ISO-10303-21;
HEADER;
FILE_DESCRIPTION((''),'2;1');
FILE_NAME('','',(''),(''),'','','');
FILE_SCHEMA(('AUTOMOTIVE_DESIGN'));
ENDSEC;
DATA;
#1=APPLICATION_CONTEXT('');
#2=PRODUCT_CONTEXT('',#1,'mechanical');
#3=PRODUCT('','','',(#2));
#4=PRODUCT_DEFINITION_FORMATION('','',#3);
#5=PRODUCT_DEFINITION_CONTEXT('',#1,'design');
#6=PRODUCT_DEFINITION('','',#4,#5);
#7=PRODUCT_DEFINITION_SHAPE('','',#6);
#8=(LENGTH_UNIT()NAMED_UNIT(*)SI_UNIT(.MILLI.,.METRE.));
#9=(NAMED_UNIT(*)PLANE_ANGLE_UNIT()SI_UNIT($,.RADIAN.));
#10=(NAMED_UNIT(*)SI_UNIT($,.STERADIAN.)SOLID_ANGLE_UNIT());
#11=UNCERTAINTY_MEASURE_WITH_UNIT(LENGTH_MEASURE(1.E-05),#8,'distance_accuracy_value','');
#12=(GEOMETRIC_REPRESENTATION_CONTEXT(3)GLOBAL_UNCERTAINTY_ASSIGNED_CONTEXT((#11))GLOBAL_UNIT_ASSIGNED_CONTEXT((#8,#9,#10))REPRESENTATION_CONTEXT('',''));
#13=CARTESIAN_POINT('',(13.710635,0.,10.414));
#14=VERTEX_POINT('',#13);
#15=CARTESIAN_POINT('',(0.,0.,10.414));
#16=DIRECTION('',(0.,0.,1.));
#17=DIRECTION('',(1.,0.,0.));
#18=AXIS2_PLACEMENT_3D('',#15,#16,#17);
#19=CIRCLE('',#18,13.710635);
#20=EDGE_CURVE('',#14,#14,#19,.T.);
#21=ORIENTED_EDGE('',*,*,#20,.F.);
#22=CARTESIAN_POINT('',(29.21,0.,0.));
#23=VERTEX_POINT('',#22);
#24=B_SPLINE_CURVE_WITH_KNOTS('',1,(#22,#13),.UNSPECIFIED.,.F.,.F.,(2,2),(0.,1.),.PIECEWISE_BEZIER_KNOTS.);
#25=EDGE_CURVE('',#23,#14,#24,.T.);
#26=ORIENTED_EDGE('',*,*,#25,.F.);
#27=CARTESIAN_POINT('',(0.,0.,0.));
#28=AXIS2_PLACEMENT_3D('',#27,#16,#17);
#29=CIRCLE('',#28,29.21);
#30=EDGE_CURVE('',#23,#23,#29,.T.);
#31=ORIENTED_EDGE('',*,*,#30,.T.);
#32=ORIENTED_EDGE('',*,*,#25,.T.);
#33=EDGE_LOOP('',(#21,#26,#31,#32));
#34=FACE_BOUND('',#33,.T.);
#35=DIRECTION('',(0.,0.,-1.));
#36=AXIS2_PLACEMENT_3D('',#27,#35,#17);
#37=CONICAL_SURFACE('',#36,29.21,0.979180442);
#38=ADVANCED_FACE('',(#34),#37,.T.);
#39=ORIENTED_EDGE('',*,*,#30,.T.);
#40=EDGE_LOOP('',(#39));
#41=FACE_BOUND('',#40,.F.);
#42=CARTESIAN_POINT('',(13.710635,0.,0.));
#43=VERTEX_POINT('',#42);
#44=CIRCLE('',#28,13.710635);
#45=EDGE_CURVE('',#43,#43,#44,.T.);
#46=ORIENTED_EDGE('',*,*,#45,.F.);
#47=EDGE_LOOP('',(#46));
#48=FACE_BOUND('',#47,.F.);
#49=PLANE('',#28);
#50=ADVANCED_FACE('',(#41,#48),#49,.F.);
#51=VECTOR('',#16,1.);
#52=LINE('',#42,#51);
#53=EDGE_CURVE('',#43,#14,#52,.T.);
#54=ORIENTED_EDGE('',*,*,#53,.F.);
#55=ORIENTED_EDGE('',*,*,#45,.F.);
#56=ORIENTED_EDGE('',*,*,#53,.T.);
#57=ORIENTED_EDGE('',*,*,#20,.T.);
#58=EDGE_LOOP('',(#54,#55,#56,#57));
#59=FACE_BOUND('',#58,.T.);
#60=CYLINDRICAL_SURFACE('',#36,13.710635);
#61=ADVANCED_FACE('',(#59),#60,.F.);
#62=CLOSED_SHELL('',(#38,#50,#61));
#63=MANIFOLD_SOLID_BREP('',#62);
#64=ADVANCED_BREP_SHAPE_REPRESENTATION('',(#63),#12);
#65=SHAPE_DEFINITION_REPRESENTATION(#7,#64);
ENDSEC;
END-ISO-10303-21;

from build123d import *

# Parameters (mm, degrees)
F0_R     = 29.21
F2_R     = 13.7106345788
F6_R     = 13.7106345788
F7_DEPTH = 37.846


# Not quite as in the source:
# - the program builds the solid bodies; features that only make, move or delete a surface that nothing else refers to are left out


with BuildPart() as f3:
    # F0 (on Top) → F3 section 0
    with BuildSketch(Plane.XY):
        Circle(F0_R)
    # F2 (on offset) → F3 section 1
    with BuildSketch(Plane.XY.offset(10.414)):
        Circle(F2_R)
    loft()

    # F6 (on Top) → F7 (cut)
    with BuildSketch(Plane.XY):
        Circle(F6_R)
    extrude(amount=F7_DEPTH, mode=Mode.SUBTRACT)


solid = f3.part
